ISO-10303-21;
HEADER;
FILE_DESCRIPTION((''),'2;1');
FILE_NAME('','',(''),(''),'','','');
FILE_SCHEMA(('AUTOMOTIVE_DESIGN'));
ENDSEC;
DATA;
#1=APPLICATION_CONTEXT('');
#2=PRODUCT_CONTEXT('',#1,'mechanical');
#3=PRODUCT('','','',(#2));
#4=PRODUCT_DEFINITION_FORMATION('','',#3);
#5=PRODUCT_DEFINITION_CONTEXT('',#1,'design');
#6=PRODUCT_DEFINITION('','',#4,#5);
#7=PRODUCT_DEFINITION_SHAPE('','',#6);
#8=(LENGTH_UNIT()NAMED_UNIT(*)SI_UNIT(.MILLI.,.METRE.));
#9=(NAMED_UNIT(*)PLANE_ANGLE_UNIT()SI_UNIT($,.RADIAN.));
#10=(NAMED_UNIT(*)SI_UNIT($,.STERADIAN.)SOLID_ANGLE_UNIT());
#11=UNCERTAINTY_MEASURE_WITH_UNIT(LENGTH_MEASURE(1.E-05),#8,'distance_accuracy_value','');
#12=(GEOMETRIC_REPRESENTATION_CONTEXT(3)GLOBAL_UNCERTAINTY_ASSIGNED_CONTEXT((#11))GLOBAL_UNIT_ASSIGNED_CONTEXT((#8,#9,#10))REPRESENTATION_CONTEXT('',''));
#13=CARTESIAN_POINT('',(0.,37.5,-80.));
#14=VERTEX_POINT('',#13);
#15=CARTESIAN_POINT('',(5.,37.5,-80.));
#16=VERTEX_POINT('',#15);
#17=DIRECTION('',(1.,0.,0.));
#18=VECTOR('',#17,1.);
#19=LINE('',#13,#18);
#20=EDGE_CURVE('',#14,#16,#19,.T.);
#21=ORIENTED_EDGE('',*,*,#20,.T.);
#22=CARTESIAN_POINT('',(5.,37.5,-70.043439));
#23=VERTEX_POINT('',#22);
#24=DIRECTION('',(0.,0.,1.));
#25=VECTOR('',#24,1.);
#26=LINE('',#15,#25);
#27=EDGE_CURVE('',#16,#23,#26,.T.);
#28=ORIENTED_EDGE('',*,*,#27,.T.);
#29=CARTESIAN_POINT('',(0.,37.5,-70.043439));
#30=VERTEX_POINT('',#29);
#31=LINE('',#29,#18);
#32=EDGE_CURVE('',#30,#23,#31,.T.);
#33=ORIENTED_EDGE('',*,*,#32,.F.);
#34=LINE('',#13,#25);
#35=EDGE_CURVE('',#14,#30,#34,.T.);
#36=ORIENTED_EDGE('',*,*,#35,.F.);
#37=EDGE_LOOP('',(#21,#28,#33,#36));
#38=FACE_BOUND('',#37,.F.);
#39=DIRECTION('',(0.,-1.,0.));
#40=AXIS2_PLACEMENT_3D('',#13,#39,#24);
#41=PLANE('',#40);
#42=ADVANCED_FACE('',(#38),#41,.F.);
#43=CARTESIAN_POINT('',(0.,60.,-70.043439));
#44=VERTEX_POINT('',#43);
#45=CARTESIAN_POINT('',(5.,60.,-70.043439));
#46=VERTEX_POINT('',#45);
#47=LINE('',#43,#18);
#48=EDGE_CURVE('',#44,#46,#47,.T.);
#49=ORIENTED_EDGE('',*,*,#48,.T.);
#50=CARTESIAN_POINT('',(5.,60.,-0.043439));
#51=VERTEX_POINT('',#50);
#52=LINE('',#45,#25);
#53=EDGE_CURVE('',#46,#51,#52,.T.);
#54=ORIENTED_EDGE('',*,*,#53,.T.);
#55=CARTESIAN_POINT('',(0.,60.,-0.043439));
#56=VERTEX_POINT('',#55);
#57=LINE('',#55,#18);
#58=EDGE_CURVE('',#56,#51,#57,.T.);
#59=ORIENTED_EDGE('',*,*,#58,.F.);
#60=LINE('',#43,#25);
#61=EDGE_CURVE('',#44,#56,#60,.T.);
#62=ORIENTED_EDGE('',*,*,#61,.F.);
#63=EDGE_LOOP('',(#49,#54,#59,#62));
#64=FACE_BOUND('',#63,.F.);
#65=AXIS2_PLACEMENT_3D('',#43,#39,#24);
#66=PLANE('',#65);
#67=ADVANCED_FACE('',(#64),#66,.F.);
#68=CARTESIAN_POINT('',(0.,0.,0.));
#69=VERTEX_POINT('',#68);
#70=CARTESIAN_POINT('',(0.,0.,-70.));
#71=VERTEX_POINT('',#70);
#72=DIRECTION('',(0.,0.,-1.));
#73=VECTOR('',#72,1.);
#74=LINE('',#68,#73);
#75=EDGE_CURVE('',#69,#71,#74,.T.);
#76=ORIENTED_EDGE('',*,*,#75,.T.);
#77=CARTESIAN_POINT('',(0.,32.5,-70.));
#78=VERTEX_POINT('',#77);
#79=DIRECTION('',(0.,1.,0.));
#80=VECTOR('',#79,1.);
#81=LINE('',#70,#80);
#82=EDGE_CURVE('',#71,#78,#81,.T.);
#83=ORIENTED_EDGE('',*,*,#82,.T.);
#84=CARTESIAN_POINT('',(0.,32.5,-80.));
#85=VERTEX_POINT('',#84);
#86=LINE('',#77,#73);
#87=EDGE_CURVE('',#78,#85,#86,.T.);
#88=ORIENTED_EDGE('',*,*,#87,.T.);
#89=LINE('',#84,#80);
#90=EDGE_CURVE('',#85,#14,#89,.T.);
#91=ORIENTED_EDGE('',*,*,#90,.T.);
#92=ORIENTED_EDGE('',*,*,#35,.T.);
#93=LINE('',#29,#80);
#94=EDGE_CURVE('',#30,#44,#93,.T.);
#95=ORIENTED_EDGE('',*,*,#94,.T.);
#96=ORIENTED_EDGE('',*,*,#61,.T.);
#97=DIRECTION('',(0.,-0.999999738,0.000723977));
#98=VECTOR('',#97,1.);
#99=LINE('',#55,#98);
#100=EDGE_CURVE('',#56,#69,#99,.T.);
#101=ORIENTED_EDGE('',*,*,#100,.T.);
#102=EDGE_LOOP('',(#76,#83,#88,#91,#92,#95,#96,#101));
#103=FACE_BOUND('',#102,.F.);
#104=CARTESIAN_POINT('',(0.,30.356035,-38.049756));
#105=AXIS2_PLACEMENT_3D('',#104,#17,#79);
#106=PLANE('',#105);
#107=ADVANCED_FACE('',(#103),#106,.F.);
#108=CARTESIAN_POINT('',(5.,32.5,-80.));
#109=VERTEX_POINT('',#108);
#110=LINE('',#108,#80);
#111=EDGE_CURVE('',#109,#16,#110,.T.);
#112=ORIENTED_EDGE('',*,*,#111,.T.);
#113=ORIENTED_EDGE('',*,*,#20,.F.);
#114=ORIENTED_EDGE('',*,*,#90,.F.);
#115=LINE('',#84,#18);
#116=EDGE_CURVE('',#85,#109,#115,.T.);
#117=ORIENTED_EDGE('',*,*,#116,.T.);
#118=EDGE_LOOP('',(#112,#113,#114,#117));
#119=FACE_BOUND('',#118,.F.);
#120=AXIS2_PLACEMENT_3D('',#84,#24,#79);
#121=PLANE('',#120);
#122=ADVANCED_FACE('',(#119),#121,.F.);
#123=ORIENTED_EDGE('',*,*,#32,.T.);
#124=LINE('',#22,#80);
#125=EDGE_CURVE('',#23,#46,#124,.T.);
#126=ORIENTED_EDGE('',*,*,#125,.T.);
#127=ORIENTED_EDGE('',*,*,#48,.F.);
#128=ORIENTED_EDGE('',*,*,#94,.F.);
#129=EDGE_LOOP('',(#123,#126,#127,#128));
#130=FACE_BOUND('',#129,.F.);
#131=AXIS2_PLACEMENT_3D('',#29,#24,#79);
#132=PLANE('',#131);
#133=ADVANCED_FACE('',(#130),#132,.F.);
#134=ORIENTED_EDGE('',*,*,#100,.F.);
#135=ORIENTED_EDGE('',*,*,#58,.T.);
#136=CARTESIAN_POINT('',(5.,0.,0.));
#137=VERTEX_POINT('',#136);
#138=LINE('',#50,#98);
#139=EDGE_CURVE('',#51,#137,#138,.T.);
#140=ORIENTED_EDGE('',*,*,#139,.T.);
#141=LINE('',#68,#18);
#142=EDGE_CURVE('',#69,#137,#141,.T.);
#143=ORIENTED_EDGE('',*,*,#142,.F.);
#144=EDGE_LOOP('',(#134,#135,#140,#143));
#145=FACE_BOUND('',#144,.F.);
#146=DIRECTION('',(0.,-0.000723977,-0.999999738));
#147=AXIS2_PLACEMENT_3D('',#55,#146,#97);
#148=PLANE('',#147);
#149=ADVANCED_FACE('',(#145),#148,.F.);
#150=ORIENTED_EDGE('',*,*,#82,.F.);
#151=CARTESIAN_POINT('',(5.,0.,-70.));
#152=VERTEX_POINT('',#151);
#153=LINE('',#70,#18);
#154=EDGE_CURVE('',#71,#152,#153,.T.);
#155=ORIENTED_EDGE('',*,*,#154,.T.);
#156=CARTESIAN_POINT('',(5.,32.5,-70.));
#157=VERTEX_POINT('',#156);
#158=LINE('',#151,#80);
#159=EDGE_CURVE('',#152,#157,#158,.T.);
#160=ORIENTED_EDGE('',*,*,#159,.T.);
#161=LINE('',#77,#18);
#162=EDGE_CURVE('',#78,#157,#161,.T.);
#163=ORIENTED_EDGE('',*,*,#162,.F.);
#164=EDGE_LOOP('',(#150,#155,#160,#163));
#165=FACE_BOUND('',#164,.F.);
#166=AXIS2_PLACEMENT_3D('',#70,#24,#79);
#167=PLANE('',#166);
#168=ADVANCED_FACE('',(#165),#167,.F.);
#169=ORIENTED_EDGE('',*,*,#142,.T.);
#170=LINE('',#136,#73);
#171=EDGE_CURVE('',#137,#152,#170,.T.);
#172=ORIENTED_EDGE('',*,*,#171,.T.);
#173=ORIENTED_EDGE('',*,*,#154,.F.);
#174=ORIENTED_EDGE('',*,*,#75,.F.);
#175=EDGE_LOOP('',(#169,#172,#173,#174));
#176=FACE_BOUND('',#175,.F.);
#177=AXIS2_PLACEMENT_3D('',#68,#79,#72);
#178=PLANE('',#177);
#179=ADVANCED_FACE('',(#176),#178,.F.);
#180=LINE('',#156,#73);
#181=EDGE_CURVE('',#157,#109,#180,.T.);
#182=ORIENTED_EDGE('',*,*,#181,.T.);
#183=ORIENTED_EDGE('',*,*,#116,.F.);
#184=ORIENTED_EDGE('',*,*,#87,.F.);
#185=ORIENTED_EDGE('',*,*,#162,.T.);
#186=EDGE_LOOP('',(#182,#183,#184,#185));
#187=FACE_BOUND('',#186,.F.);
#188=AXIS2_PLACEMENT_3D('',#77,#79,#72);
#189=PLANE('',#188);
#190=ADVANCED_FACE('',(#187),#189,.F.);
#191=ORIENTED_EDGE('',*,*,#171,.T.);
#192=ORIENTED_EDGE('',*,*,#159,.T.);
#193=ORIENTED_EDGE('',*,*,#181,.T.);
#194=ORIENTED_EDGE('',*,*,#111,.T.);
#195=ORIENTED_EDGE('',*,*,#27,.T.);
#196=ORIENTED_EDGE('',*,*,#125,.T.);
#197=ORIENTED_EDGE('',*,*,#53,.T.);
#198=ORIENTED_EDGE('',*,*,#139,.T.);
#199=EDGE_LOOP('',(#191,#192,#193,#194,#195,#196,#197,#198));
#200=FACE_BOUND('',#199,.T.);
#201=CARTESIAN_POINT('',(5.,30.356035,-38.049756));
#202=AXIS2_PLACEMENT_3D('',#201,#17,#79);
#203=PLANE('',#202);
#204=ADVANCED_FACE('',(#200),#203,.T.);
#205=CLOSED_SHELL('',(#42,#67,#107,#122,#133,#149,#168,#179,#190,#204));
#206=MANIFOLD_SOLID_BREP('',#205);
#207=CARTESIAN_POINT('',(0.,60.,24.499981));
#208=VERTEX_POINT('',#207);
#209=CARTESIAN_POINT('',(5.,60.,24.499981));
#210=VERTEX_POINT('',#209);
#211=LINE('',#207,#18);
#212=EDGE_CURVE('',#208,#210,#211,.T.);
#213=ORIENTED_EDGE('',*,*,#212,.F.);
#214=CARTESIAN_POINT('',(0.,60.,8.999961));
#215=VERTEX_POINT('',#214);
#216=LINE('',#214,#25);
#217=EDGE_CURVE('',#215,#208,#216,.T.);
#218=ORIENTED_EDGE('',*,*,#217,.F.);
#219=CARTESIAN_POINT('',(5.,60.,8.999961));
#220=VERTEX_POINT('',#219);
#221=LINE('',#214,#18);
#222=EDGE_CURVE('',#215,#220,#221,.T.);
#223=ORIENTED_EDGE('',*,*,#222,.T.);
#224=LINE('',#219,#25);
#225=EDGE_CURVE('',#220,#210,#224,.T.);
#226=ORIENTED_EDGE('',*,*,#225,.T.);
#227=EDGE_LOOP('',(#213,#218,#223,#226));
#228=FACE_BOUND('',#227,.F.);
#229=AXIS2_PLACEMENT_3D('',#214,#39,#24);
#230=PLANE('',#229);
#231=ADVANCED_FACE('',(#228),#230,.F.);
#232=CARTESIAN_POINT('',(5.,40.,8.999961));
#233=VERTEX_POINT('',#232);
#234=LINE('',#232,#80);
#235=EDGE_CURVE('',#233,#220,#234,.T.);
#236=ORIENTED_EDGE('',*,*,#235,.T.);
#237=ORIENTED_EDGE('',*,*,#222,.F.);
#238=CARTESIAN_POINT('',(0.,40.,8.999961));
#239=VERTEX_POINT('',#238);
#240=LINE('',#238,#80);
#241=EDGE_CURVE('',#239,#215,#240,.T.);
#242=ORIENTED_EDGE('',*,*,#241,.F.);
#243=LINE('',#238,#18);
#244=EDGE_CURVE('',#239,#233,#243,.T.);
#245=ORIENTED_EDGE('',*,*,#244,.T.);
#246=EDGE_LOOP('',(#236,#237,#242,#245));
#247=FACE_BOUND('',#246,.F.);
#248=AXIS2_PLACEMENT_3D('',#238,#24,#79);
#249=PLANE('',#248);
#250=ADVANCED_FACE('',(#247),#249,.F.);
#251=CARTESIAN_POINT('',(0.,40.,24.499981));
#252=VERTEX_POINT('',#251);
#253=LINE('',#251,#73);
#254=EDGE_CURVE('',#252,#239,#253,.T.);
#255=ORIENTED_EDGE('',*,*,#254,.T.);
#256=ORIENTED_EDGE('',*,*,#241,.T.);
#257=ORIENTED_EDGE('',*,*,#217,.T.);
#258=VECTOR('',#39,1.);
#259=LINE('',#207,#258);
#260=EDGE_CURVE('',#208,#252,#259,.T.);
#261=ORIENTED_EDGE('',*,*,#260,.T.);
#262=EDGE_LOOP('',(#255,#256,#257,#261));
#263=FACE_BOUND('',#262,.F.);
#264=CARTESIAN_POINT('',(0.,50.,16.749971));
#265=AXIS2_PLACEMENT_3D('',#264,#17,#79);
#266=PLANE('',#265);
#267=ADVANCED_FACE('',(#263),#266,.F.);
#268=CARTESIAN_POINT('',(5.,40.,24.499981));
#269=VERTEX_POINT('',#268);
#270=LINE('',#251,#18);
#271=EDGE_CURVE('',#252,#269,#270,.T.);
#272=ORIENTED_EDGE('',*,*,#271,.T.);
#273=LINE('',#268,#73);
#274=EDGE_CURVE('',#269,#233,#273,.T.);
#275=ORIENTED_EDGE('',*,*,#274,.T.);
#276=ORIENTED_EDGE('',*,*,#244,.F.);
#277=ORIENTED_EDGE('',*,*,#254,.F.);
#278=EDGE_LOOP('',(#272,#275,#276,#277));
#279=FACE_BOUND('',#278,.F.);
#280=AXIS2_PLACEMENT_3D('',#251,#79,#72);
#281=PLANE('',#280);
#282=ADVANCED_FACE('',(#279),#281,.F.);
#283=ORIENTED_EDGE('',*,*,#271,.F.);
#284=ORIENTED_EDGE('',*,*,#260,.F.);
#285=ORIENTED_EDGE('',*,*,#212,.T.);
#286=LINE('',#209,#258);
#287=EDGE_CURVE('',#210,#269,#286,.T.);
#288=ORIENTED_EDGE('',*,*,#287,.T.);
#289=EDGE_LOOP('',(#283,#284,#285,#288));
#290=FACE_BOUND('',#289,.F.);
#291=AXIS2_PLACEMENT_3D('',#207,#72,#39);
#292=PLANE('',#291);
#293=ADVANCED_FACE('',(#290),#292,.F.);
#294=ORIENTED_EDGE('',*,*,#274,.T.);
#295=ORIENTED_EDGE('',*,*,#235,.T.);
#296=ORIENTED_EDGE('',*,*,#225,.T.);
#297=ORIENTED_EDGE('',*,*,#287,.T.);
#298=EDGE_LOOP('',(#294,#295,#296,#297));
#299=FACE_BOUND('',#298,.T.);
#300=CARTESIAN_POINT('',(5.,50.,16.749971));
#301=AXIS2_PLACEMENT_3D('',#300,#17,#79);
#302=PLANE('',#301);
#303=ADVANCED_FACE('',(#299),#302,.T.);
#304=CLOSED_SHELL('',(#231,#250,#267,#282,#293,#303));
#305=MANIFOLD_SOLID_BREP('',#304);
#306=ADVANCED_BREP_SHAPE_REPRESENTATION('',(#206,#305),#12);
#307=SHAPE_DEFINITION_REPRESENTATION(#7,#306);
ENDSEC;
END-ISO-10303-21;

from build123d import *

# Parameters (mm, degrees)
F1_DEPTH = 5


# Not quite as in the source:
# - a feature names something its author has since deleted; it is built from what else it names


with BuildPart() as f1:
    # F0 (on Right) → F1 (new body)
    with BuildSketch(Plane.YZ):
        Polygon((60, -0.0434386059), (0, 0), (0, -70), (12, -70), (12.4011761725, -70), (32.5, -70), (32.5, -80), (37.5, -80), (37.5, -70.0434386059), (60, -70.0434386059), align=None)
    extrude(amount=F1_DEPTH)


with BuildPart() as f1b:
    # F0 (on Right) → F1, piece 2 (new body)
    with BuildSketch(Plane.YZ):
        Polygon((40, 8.9999613941), (42.5, 8.9999613941), (60, 8.9999613941), (60, 24.499980697), (42.5, 24.499980697), (40, 24.499980697), align=None)
    extrude(amount=F1_DEPTH)


solid = Compound([f1.part, f1b.part])
